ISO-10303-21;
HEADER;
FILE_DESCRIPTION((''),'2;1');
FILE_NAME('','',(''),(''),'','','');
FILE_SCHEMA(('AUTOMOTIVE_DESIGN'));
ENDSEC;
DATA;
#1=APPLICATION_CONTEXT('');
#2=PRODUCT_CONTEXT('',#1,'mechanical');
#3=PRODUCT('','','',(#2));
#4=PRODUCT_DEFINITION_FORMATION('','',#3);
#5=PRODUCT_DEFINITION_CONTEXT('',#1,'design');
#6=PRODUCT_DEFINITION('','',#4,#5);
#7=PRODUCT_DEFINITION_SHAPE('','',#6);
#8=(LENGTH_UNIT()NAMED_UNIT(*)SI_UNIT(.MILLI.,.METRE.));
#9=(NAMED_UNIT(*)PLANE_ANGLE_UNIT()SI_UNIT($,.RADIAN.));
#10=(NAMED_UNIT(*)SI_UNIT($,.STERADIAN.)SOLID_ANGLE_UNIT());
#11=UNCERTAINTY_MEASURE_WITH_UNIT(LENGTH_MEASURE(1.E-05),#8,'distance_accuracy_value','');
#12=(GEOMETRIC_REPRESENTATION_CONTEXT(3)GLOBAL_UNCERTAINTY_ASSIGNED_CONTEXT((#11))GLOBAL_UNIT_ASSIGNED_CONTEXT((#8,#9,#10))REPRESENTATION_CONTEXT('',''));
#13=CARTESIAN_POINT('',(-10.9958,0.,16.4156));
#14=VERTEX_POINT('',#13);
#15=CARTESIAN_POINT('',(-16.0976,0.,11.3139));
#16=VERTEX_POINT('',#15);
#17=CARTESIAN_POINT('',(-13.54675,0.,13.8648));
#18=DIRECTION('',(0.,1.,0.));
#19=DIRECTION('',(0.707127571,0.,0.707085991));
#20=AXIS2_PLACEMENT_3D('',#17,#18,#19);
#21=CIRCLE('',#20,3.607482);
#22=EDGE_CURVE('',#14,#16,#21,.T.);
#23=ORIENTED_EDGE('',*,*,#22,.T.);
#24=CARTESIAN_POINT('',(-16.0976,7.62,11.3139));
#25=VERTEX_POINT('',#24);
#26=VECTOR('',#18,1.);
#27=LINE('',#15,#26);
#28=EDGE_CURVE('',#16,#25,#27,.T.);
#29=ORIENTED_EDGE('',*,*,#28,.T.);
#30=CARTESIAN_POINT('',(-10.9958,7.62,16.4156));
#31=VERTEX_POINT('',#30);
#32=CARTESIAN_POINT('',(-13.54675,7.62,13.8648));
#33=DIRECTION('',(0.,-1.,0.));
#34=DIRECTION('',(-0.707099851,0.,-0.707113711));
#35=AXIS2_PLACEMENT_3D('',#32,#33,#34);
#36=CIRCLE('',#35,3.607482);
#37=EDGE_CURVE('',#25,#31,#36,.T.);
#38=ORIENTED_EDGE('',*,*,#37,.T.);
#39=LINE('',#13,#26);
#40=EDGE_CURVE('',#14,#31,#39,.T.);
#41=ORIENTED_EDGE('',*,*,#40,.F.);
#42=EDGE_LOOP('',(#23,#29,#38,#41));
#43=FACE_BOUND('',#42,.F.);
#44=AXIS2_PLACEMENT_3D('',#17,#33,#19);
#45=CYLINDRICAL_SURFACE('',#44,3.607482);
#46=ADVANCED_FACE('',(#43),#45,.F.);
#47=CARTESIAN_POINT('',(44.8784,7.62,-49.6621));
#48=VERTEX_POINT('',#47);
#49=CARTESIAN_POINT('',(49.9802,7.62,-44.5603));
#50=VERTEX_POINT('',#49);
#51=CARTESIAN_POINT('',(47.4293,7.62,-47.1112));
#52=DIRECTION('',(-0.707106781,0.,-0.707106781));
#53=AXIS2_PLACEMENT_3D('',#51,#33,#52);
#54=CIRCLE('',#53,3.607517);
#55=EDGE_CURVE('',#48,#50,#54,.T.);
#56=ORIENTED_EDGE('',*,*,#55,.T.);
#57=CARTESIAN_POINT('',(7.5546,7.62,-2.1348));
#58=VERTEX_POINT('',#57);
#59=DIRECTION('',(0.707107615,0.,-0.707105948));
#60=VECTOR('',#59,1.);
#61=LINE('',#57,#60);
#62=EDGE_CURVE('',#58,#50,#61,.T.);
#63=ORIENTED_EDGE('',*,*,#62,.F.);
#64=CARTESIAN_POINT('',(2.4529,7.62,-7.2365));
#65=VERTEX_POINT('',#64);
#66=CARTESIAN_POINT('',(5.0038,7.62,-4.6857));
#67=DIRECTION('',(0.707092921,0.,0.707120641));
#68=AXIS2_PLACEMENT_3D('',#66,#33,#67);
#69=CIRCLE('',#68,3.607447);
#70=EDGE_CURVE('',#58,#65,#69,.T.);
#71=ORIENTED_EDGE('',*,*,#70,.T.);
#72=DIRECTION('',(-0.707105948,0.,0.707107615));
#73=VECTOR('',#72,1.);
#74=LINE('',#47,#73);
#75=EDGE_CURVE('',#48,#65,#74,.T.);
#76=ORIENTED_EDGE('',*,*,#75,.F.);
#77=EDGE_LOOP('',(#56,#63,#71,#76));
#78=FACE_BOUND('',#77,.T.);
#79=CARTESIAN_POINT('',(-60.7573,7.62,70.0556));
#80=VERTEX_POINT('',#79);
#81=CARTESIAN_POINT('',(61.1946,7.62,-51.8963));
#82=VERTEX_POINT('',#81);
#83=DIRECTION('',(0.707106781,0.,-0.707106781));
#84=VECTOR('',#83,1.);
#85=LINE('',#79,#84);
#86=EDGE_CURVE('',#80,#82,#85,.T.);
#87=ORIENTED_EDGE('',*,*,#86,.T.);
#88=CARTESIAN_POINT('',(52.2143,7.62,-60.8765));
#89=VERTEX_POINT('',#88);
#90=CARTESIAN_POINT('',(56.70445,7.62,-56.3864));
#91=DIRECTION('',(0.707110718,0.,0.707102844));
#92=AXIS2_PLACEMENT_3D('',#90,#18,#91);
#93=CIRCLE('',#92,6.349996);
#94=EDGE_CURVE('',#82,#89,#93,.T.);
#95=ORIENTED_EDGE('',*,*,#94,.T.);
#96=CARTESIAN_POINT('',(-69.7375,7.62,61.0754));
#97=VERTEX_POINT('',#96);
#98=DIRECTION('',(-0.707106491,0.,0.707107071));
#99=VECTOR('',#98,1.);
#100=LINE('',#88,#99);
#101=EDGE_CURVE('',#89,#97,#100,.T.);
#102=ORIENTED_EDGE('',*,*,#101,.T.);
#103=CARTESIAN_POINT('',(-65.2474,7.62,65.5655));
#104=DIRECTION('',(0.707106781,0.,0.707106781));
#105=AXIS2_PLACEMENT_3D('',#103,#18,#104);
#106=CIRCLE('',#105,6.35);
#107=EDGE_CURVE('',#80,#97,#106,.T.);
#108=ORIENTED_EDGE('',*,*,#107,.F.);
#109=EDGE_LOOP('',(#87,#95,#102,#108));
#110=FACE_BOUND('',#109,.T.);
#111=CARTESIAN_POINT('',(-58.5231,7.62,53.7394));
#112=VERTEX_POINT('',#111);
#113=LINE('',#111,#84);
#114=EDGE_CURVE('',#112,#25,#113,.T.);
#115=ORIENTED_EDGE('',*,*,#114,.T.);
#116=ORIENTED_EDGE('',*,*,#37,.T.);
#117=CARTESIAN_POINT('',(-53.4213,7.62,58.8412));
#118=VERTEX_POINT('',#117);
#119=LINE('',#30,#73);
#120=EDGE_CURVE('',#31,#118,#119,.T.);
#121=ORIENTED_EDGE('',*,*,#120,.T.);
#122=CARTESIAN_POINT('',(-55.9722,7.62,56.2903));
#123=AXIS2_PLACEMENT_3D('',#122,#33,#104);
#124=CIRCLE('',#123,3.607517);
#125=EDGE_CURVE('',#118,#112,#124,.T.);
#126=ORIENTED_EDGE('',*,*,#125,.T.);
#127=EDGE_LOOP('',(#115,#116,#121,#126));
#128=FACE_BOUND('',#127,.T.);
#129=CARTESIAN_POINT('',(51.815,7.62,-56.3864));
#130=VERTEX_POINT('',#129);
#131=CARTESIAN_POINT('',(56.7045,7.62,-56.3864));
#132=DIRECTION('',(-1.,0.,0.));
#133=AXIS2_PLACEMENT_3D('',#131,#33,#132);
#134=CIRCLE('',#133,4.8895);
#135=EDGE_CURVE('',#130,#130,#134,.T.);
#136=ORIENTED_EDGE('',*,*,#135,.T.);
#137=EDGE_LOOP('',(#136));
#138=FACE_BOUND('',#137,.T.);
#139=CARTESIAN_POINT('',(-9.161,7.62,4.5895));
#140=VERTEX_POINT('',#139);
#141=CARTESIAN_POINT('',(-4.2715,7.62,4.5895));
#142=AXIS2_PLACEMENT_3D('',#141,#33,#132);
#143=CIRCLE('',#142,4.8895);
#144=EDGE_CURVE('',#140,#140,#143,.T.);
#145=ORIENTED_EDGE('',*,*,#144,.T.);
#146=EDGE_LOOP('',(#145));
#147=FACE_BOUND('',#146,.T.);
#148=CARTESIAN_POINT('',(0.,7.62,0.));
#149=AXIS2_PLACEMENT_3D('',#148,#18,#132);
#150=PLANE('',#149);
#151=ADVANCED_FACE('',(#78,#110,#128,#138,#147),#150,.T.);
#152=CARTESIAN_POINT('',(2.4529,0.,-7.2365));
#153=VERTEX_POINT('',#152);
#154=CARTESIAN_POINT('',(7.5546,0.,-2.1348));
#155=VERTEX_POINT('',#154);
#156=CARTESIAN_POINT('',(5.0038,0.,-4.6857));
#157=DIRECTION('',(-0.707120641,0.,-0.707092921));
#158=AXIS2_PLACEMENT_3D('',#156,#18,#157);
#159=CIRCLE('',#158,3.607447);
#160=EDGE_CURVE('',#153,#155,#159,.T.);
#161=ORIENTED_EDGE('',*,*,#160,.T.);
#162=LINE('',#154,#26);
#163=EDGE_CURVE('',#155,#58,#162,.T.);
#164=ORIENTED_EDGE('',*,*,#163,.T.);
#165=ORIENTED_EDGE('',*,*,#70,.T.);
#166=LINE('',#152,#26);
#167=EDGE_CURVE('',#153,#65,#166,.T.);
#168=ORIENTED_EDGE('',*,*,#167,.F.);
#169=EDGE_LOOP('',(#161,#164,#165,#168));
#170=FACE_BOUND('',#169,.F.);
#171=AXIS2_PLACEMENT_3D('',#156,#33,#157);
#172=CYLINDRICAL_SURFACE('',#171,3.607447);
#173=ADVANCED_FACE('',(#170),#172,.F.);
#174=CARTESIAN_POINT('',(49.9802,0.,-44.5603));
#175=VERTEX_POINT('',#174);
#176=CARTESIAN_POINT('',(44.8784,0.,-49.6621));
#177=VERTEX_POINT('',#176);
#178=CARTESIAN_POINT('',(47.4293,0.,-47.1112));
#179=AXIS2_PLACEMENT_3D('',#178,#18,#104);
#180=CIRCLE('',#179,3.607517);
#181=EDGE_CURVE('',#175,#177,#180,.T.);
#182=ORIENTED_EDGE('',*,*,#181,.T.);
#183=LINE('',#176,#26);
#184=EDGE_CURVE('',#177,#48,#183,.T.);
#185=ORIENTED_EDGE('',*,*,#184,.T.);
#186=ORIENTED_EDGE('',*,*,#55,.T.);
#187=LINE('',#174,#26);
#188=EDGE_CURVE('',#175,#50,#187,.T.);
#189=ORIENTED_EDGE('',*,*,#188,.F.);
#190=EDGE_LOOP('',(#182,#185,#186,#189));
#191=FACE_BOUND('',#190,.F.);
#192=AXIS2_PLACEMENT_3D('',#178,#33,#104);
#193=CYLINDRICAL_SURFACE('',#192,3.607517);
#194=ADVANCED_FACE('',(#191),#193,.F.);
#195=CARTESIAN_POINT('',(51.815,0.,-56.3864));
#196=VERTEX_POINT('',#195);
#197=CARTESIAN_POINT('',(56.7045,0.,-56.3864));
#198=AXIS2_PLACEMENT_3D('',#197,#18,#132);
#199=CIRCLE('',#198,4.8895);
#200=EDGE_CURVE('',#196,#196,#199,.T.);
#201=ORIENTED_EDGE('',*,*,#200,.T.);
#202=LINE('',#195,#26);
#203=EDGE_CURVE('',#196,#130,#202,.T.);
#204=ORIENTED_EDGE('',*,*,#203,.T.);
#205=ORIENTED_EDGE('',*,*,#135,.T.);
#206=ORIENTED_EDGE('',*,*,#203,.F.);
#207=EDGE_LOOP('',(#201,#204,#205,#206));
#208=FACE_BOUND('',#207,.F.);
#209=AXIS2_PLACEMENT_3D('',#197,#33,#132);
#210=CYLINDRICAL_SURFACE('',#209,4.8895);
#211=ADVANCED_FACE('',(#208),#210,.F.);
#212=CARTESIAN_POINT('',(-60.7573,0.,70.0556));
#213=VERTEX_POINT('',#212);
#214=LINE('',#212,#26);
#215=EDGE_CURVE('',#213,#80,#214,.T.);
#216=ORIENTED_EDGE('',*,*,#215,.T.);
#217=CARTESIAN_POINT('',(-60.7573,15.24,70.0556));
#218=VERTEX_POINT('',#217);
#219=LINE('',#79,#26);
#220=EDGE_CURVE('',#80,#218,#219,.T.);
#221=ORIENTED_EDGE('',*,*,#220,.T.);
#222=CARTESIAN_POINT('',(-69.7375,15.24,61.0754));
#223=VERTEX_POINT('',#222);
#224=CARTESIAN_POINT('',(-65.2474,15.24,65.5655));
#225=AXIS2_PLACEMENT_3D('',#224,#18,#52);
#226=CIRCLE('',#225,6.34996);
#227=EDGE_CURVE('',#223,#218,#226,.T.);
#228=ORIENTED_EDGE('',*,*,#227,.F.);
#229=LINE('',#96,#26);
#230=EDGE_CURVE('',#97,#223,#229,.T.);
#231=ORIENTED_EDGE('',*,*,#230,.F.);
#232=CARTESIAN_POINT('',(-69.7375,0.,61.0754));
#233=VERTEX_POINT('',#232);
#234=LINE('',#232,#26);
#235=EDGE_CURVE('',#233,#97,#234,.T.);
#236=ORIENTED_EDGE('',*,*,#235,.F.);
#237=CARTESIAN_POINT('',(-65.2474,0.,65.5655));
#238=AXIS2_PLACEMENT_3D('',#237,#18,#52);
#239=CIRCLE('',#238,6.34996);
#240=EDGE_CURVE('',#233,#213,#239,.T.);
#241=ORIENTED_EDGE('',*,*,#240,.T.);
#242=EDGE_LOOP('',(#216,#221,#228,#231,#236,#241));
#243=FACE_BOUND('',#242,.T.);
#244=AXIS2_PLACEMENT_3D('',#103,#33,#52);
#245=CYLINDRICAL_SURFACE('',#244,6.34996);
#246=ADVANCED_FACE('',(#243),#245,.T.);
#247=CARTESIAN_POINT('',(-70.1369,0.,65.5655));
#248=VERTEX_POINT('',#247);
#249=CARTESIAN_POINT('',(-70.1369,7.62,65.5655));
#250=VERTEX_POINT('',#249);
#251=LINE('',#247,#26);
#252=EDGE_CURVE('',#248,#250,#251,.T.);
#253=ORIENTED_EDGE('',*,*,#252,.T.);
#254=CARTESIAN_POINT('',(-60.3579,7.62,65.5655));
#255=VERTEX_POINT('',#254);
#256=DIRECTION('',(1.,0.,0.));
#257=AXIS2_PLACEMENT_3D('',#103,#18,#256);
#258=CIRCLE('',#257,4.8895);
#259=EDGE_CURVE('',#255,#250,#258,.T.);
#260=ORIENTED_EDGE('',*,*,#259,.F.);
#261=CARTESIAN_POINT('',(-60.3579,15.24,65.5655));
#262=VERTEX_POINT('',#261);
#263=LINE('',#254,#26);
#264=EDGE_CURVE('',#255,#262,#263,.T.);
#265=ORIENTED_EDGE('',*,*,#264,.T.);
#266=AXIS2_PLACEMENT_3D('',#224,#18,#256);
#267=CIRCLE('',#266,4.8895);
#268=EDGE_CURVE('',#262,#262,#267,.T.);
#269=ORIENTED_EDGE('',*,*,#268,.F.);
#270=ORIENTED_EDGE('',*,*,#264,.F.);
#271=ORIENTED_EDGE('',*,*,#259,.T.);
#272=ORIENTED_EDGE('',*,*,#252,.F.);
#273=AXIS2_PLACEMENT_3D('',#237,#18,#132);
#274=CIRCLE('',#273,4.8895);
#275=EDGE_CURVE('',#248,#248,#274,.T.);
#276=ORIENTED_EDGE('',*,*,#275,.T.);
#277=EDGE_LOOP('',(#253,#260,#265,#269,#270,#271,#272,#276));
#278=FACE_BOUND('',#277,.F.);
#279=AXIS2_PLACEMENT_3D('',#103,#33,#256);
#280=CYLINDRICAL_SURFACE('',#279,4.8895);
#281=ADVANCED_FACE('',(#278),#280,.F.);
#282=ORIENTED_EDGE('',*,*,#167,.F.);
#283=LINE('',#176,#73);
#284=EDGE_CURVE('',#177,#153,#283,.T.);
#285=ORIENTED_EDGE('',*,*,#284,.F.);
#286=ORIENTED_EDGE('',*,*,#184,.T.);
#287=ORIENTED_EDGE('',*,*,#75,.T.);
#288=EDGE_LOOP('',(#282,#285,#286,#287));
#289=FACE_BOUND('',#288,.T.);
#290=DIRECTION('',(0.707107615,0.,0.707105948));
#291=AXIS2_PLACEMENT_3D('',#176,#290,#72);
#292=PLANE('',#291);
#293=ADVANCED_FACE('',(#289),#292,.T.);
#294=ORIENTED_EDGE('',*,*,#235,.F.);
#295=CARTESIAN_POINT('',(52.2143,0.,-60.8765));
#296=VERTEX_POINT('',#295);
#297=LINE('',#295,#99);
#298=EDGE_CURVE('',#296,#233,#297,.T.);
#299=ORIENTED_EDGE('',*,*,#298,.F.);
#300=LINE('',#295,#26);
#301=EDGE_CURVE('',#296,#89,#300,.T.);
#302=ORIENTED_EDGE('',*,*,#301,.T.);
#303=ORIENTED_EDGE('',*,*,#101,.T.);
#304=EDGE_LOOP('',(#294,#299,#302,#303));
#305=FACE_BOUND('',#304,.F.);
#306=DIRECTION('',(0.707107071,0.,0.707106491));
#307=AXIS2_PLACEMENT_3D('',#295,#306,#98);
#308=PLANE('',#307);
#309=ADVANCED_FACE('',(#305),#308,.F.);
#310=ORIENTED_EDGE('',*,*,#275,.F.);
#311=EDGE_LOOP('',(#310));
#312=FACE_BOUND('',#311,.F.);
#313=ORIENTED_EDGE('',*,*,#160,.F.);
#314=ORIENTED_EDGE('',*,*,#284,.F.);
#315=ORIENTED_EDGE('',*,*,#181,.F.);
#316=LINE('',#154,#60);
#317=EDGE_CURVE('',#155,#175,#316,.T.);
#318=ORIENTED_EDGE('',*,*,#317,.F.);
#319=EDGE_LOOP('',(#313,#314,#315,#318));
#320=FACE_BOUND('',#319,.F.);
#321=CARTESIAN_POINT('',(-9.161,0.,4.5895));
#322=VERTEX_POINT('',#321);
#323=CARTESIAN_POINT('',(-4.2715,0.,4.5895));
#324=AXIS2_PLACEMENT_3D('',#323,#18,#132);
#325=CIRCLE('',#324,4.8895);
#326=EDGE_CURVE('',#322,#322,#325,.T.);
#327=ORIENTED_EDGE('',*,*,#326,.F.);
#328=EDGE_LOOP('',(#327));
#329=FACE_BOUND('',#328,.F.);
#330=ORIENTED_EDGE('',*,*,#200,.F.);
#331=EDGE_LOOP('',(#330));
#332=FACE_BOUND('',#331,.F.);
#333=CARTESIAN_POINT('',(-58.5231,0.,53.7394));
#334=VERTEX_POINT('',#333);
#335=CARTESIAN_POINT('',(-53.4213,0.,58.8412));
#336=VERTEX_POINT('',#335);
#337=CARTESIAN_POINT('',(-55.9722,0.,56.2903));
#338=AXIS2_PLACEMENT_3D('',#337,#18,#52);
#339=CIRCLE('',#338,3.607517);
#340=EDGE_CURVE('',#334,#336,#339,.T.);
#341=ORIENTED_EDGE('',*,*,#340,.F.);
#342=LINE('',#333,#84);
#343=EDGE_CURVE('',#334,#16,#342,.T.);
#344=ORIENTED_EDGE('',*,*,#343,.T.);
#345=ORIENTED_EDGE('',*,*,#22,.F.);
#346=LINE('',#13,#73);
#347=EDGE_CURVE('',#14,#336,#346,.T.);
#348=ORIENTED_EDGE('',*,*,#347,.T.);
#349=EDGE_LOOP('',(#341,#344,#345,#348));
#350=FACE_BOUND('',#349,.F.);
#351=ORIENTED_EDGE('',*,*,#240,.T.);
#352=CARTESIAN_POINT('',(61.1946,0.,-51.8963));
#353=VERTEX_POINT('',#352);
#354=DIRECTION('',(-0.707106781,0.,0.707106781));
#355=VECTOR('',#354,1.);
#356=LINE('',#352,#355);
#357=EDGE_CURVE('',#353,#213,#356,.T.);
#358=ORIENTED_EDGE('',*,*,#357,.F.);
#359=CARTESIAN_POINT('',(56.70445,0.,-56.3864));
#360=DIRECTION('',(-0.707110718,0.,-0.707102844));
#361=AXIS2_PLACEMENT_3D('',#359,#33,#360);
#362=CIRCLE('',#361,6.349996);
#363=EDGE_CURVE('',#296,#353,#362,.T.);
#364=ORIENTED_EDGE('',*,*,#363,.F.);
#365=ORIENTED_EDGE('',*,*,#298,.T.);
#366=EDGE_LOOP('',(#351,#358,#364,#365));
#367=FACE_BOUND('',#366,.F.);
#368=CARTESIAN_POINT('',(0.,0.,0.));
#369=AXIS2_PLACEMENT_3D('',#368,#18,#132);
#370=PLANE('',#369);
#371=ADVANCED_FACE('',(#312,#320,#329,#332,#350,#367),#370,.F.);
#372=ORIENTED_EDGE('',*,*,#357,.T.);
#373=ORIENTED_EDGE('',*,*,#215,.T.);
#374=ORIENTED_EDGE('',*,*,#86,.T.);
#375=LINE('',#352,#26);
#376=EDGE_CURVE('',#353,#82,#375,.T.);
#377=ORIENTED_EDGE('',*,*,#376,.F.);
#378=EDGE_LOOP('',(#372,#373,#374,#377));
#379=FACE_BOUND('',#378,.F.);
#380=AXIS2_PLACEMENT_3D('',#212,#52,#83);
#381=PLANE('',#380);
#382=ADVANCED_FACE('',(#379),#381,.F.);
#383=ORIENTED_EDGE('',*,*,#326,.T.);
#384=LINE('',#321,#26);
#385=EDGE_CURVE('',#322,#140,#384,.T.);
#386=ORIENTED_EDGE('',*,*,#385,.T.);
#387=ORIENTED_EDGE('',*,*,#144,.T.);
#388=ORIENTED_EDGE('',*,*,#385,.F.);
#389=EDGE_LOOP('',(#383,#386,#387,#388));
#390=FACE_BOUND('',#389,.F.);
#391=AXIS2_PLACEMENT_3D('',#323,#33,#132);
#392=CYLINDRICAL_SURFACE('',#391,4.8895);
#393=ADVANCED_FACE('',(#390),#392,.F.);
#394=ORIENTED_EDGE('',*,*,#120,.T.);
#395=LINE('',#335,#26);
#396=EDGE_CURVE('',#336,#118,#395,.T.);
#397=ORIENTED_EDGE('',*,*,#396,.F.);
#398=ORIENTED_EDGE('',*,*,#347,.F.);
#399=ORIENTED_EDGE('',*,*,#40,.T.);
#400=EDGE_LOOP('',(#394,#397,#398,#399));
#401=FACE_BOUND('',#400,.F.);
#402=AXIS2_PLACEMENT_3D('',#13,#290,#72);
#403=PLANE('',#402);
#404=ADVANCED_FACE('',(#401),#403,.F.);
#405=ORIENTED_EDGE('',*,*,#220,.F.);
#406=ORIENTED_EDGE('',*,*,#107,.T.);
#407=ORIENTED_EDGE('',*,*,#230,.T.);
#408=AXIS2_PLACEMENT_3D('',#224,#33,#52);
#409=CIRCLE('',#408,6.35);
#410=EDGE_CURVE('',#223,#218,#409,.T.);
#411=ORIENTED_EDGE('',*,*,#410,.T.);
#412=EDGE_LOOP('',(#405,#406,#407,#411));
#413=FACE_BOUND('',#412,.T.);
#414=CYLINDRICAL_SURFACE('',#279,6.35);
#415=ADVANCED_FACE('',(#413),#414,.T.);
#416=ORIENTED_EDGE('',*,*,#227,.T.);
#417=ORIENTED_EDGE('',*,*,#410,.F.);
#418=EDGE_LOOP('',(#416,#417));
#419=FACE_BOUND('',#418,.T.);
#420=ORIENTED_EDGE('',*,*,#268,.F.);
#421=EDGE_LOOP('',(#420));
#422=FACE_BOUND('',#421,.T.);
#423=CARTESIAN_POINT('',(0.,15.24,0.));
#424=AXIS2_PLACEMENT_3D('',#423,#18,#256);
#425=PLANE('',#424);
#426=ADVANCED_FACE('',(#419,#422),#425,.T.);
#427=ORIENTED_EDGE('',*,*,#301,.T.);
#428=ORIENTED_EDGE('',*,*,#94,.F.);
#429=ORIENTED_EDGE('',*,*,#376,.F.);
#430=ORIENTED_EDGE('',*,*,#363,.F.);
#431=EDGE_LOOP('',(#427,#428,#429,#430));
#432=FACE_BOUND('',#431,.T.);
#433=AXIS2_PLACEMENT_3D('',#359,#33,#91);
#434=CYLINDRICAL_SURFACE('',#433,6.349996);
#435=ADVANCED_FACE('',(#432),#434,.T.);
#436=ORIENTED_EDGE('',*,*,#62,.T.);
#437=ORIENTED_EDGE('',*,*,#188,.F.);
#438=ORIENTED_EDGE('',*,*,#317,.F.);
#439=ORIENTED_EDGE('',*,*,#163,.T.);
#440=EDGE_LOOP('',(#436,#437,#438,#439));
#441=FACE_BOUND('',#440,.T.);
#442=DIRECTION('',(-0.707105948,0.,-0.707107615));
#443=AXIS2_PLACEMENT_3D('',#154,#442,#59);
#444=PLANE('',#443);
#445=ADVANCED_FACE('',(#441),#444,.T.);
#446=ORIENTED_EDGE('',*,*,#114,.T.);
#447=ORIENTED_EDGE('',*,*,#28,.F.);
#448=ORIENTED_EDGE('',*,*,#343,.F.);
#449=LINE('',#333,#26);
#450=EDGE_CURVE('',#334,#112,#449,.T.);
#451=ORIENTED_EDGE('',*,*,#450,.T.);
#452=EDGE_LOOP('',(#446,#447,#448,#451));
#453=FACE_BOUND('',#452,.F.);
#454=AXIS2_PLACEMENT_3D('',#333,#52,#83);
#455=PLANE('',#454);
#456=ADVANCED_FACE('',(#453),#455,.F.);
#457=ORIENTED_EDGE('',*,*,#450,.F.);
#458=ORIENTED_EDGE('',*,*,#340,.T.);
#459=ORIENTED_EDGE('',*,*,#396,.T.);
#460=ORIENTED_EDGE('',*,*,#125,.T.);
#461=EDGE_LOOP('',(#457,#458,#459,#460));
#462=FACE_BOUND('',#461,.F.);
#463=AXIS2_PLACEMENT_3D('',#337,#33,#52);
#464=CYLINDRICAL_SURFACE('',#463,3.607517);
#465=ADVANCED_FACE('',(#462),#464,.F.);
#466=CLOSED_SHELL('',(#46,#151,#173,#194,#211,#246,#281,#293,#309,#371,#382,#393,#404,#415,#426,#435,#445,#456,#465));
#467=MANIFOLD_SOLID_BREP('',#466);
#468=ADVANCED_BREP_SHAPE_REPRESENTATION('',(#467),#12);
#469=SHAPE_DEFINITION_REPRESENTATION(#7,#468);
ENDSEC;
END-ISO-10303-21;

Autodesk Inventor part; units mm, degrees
ref_plane "YZ Plane" through (0, 0, 0) normal (1, 0, 0) x (0, 1, 0)
ref_plane "XZ Plane" through (0, 0, 0) normal (0, 1, 0) x (-1, 0, 0)
ref_plane "XY Plane" through (0, 0, 0) normal (0, 0, 1) x (1, 0, 0)
sketch "Sketch1" plane through (0, 0, 0) normal (0, 1, 0) x (-1, 0, 0)
  circle A0 centre (-56.7045, -56.3864) radius 4.8895
  circle A1 centre (-56.7045, -56.3864) radius 4.8895
  line L0 (-52.2143, -60.8765) -> (69.7375, 61.0754)
  line L1 (60.7573, 70.0556) -> (-61.1946, -51.8963)
  arc A2 (-61.1946, -51.8963) -> (-52.2143, -60.8765) centre (-56.7045, -56.3864) ccw
  arc A3 (69.7375, 61.0754) -> (60.7573, 70.0556) centre (65.2474, 65.5655) ccw
  circle A4 centre (4.2715, 4.5895) radius 4.8895
  circle A5 centre (65.2474, 65.5655) radius 4.8895
  line L2 (7.7289, 8.0469) -> (61.79, 62.1081)
  line L3 (68.7048, 69.0229) -> (69.7375, 70.0556)
  line L4 (-53.2471, -52.929) -> (0.8141, 1.1322) construction
  line L5 (7.7289, 8.0469) -> (61.79, 62.1081) construction
  line L6 (0.8141, 1.1322) -> (-53.2471, -52.929)
  line L7 (-60.1619, -59.8438) -> (-61.1946, -60.8765)
  line L8 (-5.0037, -4.6857) -> (-47.4293, -47.1112) construction
  line L9 (-7.5546, -2.1348) -> (-49.9802, -44.5603)
  line L10 (-44.8784, -49.6621) -> (-2.4529, -7.2365)
  arc A6 (-2.4529, -7.2365) -> (-7.5546, -2.1348) centre (-5.0037, -4.6857) ccw
  arc A7 (-49.9802, -44.5603) -> (-44.8784, -49.6621) centre (-47.4293, -47.1112) ccw
  line L11 (4.2715, 4.5895) -> (-0.2187, 9.0797)
  arc A8 (10.9958, 16.4156) -> (16.0976, 11.3139) centre (13.5467, 13.8648) ccw
  line L12 (10.9958, 16.4156) -> (53.4213, 58.8412)
  line L13 (58.5231, 53.7394) -> (16.0976, 11.3139)
  arc A9 (58.5231, 53.7394) -> (53.4213, 58.8412) centre (55.9722, 56.2903) ccw
  point P0 (0, 0)
  point P1 (29.6663, 4.6577)
  point P2 (-26.2165, -25.8984)
  dimension "d0" = 172.466
  dimension "d1" = 12.7
  dimension "d2" = 9.779
  dimension "d3" = 9.779
  dimension "d4" = 9.779
extrude "Extrusion1" add sketch "Sketch1" along normal blind 7.62 contours A0 L6 A7 L10 A6 A4 L2 A8 L13 A9 A5 L3 A3 L0 A2 L7 | A0 L7 A2 L1 L11 A4 L6 A6 L9 A7 | L1 A3 L3 A5 L2 A9 L12 A8 A4 L11
sketch "Sketch2" plane through (0, 7.62, 0) normal (0, 1, 0) x (1, 0, 0)
  line L0 (-60.7573, -70.0556) -> (61.1946, 51.8963) projected
  arc A0 (61.1946, 51.8963) -> (52.2143, 60.8765) centre (56.7045, 56.3864) ccw projected
  line L1 (52.2143, 60.8765) -> (-69.7375, -61.0754) projected
  arc A1 (-69.7375, -61.0754) -> (-60.7573, -70.0556) centre (-65.2474, -65.5655) ccw projected
  arc A2 (-58.5231, -53.7394) -> (-53.4213, -58.8412) centre (-55.9722, -56.2903) ccw projected
  line L2 (-58.5231, -53.7394) -> (-16.0976, -11.3139) projected
  arc A3 (-10.9958, -16.4156) -> (-16.0976, -11.3139) centre (-13.5467, -13.8648) ccw projected
  line L3 (-10.9958, -16.4156) -> (-53.4213, -58.8412) projected
  circle A4 centre (-65.2474, -65.5655) radius 4.8895 projected
  circle A5 centre (-4.2715, -4.5895) radius 4.8895 projected
  circle A6 centre (56.7045, 56.3864) radius 4.8895 projected
  arc A7 (49.9802, 44.5603) -> (44.8784, 49.6621) centre (47.4293, 47.1112) ccw projected
  line L4 (49.9802, 44.5603) -> (7.5546, 2.1348) projected
  arc A8 (2.4529, 7.2365) -> (7.5546, 2.1348) centre (5.0037, 4.6857) ccw projected
  line L5 (2.4529, 7.2365) -> (44.8784, 49.6621) projected
  circle A9 centre (-65.2474, -65.5655) radius 6.35
  point P0 (0, 0)
extrude "Extrusion2" add sketch "Sketch2" along normal blind 7.62 contours A1 A9
properties part number "Bump Arm"
